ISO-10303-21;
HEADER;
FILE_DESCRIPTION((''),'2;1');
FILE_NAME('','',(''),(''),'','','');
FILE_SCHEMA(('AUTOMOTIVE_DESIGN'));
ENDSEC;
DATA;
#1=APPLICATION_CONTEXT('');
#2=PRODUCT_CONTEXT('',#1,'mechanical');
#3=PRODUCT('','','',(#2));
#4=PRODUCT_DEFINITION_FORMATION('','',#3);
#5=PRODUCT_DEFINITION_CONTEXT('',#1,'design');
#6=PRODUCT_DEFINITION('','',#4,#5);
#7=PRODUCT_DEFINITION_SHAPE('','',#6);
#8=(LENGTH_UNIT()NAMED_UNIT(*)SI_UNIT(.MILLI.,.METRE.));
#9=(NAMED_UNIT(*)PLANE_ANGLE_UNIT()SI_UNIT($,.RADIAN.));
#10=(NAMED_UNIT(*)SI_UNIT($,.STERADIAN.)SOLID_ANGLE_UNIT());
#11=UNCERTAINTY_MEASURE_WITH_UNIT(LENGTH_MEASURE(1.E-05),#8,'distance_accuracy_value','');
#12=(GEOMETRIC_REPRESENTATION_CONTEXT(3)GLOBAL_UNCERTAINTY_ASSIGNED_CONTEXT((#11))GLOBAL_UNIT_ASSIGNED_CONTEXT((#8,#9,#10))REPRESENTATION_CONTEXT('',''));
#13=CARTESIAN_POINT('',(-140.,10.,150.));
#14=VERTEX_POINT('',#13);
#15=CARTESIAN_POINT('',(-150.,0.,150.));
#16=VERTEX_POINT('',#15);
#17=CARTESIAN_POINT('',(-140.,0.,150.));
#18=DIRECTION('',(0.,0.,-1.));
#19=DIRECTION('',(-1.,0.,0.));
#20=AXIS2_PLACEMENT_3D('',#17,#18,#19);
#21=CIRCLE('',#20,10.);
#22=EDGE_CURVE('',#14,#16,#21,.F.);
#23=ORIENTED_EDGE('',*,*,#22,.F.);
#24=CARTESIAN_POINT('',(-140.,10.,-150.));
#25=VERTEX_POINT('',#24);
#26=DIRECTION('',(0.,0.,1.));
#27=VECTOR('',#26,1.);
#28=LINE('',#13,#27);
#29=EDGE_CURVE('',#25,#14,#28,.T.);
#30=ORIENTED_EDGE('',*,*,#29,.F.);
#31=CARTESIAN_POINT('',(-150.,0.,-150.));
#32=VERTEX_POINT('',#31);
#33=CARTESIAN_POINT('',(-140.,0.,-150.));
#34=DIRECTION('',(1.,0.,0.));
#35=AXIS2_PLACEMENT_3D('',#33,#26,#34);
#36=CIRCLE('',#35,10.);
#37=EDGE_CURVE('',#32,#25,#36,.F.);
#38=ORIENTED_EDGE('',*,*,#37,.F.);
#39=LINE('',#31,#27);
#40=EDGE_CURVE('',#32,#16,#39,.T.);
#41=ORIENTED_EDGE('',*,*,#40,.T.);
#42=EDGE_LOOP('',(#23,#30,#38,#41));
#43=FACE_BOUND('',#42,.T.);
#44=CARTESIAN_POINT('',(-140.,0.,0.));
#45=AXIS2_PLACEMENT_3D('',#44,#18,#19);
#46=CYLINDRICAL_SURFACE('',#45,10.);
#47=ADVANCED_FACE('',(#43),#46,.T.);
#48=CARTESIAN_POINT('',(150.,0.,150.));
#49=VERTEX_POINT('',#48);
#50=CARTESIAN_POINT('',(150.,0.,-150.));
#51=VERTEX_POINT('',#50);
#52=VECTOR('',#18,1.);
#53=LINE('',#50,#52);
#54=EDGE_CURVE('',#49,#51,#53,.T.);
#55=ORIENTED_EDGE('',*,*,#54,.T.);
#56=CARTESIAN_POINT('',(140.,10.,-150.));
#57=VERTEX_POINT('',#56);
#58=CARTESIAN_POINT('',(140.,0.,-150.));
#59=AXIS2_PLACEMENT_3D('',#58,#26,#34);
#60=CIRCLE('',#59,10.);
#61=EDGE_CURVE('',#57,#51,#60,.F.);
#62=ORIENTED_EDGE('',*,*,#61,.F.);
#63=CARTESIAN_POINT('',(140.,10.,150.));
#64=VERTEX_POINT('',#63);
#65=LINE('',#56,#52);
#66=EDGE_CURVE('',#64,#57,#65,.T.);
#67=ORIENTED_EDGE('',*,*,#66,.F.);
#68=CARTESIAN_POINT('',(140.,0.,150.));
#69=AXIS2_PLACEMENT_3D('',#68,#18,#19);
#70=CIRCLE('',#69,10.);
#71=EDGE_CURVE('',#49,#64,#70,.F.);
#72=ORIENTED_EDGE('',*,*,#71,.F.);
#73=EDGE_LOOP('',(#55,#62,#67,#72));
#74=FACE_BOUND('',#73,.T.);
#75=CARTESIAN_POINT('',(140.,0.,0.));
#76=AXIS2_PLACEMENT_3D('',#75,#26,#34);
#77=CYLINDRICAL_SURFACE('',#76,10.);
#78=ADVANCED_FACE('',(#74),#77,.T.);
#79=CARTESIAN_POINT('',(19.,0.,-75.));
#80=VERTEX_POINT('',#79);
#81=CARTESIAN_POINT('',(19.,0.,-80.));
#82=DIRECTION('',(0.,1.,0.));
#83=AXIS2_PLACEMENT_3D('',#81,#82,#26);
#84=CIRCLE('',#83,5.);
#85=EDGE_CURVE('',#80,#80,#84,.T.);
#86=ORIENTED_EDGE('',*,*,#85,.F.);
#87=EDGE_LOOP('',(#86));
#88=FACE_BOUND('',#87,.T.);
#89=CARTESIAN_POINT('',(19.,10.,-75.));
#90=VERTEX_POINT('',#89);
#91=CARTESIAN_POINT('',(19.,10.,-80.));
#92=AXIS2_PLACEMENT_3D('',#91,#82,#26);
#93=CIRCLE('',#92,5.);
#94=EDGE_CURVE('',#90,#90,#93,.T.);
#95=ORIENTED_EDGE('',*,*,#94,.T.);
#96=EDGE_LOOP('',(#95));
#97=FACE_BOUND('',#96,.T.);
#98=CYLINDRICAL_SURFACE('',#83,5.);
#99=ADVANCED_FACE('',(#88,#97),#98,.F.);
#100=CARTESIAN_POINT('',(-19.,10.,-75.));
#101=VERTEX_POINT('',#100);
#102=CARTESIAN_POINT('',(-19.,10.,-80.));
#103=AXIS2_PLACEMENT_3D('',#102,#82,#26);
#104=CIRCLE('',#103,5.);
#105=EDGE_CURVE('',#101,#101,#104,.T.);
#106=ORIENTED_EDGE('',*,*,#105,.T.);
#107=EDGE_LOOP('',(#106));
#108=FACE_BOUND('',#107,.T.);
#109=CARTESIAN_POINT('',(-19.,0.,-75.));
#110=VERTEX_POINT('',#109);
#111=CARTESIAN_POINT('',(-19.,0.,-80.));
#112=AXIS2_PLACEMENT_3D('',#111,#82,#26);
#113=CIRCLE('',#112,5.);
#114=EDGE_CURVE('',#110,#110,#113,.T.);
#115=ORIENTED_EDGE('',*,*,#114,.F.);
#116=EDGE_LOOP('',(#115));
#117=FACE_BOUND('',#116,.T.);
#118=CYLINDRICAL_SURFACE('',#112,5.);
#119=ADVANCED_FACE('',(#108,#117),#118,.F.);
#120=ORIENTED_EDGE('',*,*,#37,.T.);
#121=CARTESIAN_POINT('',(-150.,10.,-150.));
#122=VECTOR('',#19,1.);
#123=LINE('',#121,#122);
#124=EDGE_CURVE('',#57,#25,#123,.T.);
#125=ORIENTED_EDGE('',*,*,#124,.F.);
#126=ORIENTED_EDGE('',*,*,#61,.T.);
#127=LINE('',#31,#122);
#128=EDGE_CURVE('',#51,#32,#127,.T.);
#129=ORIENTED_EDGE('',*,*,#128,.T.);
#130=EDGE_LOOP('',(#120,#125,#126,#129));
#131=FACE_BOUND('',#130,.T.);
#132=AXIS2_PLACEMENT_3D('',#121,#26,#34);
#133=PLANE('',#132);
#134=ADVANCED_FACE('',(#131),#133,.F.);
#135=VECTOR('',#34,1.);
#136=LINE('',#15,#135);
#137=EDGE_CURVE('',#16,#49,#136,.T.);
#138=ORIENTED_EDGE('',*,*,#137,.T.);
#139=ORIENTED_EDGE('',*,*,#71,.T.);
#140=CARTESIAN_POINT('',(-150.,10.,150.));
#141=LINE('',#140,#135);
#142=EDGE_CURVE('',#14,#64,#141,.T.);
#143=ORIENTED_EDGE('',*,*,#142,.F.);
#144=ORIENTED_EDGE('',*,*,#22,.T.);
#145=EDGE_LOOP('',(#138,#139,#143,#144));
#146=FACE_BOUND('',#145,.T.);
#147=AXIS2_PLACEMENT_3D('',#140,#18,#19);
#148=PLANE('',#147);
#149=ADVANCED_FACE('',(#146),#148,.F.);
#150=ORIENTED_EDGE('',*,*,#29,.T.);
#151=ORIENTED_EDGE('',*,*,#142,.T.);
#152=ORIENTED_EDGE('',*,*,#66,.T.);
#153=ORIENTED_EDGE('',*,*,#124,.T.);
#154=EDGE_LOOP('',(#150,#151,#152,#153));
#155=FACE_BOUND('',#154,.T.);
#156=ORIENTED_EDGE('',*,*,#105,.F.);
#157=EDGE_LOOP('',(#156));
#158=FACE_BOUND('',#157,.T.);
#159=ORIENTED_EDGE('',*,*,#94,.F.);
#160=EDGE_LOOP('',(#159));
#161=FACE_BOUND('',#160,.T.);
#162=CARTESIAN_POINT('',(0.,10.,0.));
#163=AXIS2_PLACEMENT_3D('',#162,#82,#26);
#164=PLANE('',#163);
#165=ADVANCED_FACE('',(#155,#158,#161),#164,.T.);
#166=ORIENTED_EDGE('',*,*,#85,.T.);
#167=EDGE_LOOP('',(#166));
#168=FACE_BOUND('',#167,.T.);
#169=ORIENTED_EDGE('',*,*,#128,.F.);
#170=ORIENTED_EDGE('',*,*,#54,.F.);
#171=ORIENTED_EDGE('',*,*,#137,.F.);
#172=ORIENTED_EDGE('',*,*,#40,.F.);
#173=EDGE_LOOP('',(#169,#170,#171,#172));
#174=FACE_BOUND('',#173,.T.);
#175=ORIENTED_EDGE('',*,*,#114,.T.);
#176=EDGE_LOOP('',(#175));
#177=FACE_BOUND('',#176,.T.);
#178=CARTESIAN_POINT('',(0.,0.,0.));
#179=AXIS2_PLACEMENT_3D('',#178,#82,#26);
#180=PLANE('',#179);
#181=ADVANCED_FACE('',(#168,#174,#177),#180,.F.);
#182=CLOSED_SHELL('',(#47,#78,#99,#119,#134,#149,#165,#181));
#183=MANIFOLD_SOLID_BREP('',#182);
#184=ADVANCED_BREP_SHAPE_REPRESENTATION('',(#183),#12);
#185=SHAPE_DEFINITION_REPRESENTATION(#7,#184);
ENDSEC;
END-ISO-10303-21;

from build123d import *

# Parameters (mm, degrees)
SKETCH1_W           = 300
SKETCH1_H           = 300
BOSS_EXTRUDE1_DEPTH = 10
SKETCH2_R           = 5
CUT_EXTRUDE1_DEPTH  = 10
FILLET2_R           = 10
FILLET3_R           = 10


with BuildPart() as part:
    # Sketch1 → Boss-Extrude1 (new body)
    with BuildSketch(Plane(origin=(0, 0, 0), x_dir=(1, 0, 0), z_dir=(0, 1, 0))):
        Rectangle(SKETCH1_W, SKETCH1_H)
    extrude(amount=BOSS_EXTRUDE1_DEPTH)

    # Sketch2 → Cut-Extrude1 (cut)
    with BuildSketch(Plane(origin=(0, 10, 0), x_dir=(1, 0, 0), z_dir=(0, 1, 0))):
        with Locations(Location((-19, 80, 0), (0, 0, 270))):
            Circle(SKETCH2_R)
        with Locations(Location((19, 80, 0), (0, 0, 270))):
            Circle(SKETCH2_R)
    extrude(amount=-CUT_EXTRUDE1_DEPTH, mode=Mode.SUBTRACT)

    # Fillet2
    fillet2_edges = [part.edges().sort_by_distance(p)[0] for p in [
        (-150, 10, 0),
    ]]
    fillet(fillet2_edges, radius=FILLET2_R - 0.0001)  # a hair under: the kernel refuses the full size

    # Fillet3
    fillet3_edges = [part.edges().sort_by_distance(p)[0] for p in [
        (150, 10, 0),
    ]]
    fillet(fillet3_edges, radius=FILLET3_R - 0.0001)  # a hair under: the kernel refuses the full size


solid = part.part
